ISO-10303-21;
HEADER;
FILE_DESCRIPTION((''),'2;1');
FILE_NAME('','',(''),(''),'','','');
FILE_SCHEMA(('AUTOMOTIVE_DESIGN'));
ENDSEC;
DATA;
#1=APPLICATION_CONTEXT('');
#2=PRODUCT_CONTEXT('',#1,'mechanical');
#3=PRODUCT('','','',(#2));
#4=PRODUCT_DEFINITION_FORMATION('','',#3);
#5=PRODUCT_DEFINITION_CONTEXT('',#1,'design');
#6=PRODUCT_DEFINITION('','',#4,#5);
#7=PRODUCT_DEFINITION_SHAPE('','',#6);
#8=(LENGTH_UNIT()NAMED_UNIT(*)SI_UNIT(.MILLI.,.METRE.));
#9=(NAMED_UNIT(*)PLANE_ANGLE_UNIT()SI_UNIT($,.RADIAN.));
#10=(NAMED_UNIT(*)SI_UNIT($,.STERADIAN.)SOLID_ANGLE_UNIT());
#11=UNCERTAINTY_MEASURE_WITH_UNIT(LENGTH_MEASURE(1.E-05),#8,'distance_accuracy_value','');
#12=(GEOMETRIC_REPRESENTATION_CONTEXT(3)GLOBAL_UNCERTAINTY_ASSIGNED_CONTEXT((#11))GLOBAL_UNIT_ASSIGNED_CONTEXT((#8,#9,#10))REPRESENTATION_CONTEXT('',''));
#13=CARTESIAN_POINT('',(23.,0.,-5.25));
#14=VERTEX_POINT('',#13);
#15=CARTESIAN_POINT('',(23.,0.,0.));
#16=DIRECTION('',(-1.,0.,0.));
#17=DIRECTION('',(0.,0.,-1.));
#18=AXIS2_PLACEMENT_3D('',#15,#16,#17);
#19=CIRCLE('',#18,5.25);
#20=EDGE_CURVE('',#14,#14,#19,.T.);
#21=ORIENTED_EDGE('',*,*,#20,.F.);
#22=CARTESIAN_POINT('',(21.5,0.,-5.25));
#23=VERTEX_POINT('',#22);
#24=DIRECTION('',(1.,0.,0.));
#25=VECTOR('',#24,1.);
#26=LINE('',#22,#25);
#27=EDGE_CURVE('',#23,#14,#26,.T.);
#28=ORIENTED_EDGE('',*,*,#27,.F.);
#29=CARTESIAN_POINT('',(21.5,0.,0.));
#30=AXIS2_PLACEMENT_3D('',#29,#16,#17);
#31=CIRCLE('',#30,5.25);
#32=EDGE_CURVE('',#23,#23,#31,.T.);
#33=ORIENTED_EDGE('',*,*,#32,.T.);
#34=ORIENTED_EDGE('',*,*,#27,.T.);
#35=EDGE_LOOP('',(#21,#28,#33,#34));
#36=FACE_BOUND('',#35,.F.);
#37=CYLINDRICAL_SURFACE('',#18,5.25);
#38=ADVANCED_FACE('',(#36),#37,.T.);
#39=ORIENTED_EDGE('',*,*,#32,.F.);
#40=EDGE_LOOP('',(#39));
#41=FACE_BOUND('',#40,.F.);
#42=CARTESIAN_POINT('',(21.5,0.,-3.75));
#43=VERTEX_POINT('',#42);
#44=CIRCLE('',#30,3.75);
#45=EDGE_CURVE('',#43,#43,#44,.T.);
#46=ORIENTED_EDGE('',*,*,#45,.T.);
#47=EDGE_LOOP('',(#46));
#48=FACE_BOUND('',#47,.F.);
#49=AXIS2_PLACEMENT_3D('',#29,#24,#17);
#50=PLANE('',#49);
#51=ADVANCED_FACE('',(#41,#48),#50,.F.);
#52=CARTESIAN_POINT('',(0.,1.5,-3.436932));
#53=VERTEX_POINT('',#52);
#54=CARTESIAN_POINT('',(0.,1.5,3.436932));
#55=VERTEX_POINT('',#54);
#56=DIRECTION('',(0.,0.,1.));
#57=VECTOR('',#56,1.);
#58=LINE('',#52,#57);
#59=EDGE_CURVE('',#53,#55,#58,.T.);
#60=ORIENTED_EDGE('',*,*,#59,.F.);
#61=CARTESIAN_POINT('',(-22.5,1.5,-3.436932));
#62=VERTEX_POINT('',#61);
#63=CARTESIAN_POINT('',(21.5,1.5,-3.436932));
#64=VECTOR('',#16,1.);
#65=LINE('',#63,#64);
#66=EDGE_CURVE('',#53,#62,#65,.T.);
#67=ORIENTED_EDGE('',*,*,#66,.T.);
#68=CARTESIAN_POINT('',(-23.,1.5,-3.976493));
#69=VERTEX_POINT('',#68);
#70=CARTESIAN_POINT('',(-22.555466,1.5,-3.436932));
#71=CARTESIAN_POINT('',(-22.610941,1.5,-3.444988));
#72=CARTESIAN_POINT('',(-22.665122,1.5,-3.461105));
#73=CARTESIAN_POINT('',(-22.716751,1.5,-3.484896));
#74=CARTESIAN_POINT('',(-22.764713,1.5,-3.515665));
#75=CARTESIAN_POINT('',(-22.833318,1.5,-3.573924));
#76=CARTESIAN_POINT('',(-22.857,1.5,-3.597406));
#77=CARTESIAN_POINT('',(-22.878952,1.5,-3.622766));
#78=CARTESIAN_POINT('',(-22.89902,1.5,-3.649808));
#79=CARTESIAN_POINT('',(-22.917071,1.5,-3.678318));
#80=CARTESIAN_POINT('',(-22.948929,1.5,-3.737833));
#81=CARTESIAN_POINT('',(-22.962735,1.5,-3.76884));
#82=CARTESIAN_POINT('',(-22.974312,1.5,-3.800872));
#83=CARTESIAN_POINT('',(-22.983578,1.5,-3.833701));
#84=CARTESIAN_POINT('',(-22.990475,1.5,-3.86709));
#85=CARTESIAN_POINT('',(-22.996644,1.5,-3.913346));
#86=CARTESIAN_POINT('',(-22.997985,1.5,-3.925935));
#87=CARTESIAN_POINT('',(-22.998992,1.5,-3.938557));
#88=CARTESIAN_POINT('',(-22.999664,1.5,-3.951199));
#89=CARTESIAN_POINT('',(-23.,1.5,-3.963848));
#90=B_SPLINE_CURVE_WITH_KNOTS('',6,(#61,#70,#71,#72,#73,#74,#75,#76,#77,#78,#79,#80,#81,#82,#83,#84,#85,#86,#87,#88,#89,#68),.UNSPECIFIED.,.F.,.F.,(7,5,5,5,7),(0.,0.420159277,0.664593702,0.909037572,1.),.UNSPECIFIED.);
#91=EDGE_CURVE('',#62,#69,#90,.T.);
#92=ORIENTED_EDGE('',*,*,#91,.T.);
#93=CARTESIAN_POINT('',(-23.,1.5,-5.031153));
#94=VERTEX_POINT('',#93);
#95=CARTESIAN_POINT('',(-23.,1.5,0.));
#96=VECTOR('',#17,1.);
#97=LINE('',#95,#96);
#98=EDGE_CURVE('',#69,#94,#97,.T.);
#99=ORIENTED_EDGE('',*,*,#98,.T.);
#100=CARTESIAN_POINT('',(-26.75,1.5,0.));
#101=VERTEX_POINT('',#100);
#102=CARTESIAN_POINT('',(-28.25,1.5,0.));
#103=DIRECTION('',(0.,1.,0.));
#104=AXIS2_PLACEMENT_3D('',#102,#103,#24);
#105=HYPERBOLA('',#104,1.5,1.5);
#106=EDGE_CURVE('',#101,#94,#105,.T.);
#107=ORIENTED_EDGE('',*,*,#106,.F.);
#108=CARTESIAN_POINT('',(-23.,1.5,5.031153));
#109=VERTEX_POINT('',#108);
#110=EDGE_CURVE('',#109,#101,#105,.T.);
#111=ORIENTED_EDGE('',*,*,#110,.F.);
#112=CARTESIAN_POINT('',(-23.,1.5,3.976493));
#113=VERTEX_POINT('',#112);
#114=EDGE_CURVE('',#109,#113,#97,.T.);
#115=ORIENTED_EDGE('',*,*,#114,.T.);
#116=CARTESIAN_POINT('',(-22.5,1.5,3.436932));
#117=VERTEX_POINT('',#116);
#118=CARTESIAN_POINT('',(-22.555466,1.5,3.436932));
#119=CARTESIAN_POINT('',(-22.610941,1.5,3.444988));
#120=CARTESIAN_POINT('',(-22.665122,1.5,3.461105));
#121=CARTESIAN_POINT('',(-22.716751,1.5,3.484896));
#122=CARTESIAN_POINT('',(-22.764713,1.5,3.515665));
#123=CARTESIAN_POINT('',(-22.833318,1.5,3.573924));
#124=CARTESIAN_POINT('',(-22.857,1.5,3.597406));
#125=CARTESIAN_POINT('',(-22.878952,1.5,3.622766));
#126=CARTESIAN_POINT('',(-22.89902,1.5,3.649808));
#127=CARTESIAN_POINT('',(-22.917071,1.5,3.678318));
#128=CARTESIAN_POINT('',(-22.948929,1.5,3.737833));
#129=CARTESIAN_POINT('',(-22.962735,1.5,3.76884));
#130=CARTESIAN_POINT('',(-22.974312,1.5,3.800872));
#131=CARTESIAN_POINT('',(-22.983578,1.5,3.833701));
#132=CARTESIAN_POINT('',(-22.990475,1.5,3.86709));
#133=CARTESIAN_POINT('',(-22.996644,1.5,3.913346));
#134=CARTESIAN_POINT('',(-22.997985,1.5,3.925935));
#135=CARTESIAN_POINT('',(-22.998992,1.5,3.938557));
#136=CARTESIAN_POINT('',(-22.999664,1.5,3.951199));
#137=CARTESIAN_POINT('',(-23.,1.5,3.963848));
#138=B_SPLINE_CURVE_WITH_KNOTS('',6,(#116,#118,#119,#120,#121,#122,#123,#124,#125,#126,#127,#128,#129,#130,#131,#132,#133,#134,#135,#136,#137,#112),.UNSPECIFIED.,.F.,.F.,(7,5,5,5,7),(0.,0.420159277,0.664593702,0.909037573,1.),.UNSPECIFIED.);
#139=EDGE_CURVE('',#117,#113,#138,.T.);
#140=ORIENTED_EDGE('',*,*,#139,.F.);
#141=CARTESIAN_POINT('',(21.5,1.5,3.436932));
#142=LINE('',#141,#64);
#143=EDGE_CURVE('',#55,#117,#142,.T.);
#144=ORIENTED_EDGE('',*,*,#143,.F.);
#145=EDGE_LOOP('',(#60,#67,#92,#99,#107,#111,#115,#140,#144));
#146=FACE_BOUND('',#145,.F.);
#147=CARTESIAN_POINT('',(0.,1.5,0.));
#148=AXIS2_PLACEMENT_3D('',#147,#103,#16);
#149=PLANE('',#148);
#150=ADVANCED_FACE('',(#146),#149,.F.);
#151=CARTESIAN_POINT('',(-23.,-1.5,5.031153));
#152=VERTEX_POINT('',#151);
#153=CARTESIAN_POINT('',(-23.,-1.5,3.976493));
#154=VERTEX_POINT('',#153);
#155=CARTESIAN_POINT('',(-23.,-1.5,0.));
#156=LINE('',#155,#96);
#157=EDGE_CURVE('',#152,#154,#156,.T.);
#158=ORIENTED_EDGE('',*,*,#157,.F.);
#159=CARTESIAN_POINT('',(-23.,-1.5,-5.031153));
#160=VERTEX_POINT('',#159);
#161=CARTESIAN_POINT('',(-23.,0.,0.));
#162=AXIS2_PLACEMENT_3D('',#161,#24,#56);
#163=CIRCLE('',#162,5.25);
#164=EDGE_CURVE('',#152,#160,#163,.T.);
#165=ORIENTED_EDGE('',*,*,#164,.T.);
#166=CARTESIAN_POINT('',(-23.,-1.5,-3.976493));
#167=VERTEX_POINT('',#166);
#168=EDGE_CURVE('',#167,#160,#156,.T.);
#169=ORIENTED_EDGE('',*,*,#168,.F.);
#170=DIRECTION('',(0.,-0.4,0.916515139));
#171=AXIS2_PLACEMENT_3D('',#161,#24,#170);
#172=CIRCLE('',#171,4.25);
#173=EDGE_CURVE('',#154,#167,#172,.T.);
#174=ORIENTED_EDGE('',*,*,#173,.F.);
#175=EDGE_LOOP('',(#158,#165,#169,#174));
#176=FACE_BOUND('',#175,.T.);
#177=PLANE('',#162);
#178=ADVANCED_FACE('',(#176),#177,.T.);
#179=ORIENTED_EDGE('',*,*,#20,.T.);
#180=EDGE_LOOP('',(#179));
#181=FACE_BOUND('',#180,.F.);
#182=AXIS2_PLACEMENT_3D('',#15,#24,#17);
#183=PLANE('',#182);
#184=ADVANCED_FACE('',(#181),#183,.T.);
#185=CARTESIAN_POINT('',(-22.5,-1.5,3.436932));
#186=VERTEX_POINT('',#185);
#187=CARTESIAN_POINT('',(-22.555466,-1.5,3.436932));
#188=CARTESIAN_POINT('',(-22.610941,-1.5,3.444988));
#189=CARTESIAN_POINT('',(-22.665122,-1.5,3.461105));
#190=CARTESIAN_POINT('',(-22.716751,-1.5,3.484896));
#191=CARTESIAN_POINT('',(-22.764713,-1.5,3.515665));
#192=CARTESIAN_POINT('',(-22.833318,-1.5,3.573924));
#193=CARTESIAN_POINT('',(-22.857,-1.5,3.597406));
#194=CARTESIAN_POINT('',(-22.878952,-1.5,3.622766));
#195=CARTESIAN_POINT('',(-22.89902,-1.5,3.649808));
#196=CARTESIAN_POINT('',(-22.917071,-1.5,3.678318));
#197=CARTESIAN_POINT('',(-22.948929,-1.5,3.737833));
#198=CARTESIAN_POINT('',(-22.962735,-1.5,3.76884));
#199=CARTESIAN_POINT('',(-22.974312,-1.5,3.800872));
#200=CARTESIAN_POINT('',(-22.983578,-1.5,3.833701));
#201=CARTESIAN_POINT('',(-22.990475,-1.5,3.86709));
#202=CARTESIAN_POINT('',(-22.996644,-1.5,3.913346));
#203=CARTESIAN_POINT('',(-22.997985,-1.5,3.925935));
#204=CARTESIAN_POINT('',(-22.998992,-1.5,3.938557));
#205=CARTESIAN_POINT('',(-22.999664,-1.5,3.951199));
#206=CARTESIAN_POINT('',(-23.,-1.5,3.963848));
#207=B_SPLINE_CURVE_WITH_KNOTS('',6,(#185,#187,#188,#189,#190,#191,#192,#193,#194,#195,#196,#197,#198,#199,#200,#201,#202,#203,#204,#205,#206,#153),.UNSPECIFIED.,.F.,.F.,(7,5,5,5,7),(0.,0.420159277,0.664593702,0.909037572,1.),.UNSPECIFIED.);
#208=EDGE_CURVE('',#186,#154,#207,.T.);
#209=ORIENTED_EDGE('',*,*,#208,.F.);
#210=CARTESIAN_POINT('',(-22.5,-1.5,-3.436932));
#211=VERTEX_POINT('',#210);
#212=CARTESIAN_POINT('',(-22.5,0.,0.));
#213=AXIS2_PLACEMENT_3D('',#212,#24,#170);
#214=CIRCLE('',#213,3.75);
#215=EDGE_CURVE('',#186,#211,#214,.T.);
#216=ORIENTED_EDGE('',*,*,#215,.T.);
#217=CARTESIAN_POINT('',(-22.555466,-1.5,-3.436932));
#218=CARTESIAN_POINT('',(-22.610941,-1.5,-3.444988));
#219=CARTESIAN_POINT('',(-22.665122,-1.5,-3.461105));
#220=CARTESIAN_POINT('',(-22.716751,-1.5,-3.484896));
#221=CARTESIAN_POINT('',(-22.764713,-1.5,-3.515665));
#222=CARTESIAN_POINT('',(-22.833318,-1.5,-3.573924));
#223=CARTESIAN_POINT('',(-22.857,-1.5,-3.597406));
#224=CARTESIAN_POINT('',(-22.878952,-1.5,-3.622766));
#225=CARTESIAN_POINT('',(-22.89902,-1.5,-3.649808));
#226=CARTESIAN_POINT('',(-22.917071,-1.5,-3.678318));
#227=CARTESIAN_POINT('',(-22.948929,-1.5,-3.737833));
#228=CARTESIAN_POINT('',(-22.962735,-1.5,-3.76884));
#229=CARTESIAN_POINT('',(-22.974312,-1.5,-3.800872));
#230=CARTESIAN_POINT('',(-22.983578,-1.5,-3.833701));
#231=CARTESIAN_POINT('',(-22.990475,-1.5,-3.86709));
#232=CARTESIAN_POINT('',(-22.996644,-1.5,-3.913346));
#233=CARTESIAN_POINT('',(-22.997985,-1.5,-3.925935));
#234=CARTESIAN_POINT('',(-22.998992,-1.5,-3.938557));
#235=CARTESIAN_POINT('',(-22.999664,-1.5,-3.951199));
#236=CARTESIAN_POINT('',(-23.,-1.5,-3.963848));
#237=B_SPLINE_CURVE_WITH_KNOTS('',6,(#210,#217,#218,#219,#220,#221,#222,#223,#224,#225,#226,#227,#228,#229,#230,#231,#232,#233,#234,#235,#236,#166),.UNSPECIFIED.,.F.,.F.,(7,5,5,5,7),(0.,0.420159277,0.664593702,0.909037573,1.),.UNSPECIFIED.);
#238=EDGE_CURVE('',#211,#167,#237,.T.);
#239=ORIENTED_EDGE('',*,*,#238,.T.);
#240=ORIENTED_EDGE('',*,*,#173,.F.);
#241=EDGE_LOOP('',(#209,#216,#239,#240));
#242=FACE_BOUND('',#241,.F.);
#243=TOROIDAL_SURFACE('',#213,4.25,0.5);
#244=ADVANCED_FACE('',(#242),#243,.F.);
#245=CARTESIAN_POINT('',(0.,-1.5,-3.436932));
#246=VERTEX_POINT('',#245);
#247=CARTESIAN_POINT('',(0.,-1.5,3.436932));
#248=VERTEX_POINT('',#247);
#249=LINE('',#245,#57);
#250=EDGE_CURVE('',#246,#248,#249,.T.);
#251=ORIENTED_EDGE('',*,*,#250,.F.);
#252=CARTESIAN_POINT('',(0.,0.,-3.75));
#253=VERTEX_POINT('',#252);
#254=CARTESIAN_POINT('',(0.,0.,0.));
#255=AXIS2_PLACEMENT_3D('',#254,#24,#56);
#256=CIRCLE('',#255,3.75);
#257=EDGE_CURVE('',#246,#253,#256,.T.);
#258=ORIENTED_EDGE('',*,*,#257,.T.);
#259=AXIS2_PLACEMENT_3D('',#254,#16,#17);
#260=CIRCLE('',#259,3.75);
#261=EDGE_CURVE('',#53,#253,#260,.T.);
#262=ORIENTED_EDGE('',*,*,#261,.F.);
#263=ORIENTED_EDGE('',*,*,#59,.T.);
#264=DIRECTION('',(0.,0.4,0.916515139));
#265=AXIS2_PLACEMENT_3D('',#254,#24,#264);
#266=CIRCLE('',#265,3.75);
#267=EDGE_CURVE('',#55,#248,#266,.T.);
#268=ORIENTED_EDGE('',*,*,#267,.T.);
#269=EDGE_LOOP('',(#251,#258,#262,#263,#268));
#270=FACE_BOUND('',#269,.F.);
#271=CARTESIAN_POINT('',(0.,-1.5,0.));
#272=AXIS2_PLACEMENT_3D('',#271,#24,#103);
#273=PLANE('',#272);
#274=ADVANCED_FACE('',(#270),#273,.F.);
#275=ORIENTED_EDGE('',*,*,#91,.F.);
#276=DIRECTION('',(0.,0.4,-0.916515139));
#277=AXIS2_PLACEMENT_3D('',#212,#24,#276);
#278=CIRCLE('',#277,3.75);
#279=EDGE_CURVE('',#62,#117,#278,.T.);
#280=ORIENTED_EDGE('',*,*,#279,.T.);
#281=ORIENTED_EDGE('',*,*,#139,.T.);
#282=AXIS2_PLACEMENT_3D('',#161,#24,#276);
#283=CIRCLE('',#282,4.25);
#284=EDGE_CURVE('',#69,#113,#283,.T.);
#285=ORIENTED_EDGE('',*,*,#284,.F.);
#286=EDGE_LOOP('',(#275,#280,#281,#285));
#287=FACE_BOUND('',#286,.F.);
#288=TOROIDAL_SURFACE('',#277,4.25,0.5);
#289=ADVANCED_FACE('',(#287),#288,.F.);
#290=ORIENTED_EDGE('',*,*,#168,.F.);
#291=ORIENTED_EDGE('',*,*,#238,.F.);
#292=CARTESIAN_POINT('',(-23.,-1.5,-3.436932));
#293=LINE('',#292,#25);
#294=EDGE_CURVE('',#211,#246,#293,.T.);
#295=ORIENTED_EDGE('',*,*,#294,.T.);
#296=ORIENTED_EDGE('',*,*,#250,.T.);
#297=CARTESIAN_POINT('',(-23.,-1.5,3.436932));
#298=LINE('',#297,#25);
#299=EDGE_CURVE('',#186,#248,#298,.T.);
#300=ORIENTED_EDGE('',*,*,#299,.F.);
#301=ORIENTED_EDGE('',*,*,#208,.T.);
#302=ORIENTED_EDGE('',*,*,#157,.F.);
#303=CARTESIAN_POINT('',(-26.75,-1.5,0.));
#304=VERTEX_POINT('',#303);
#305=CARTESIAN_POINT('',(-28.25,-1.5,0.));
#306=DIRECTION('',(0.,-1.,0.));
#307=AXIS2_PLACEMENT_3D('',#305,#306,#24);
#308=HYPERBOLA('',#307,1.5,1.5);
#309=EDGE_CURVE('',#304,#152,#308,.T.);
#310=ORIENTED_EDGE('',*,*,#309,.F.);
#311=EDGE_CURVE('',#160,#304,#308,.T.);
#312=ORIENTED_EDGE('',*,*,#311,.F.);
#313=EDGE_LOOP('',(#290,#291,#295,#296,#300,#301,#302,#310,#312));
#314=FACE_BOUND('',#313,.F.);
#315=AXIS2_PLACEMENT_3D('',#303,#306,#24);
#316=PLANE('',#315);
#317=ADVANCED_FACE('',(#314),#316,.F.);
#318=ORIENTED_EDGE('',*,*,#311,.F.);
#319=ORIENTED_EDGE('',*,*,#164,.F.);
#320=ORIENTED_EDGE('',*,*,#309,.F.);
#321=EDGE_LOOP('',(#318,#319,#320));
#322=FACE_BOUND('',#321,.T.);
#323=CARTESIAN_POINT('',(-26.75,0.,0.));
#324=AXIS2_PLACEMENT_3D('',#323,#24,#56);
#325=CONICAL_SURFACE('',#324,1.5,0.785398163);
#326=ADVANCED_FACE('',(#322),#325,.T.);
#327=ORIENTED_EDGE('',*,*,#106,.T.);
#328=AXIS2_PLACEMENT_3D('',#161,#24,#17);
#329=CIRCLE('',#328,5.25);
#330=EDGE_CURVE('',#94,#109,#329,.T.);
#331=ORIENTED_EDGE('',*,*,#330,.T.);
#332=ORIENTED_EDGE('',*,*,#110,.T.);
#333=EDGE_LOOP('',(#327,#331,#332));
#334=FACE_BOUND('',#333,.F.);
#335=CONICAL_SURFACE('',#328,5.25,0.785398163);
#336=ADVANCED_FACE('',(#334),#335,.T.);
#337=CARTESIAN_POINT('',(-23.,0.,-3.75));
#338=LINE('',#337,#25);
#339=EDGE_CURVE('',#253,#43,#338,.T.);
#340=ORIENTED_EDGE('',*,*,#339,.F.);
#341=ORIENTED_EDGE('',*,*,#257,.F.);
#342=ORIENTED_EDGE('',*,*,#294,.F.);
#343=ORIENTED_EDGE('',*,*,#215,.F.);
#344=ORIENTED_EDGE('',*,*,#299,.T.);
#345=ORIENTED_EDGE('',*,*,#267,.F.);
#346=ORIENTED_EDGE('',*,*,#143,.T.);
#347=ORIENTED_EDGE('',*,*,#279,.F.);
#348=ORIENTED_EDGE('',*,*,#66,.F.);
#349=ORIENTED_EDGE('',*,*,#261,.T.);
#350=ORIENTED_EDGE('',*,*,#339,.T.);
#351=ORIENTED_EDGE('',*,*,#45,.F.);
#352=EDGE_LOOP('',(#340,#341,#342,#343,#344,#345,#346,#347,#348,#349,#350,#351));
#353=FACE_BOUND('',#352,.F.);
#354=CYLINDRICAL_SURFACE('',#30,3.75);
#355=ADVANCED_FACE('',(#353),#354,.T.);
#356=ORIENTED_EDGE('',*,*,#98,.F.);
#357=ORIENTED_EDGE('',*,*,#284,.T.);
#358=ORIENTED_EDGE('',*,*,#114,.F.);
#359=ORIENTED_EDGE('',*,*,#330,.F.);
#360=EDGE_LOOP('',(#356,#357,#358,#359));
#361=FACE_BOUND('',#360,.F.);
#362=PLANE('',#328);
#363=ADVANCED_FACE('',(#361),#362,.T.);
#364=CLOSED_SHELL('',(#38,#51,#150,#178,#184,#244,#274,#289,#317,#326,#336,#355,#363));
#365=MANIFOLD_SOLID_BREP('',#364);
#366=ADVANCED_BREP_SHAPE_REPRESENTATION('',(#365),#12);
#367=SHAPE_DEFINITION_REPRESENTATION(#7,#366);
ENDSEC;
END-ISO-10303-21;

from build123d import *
from build123d import SkipClean  # not in build123d's __all__

# Parameters (mm, degrees)
F1_ANGLE_BACK = 90
F1_ANGLE      = 180
F2_ANGLE_BACK = 90
F2_ANGLE      = 180
F3_DEPTH      = 5.5
F4_R          = 0.5


with BuildPart() as f1:
    # F0 (on Top) → F1 (revolve)
    with BuildSketch(Plane.XY, mode=Mode.PRIVATE) as f1_sk:
        Polygon((23, 0), (0, 0), (0, -1.5), (0, -3.75), (21.5, -3.75), (21.5, -5.25), (23, -5.25), (23, -3.75), (23, -1.5), align=None)
        Polygon((0, -3.75), (0, -1.5), (-11.5, -1.5), (-23, -1.5), (-26.75, -1.5), (-23, -5.25), (-23, -3.75), align=None)
    revolve(f1_sk.sketch.rotate(Axis((11.5, 0, 0), (1, 0, 0)), -F1_ANGLE_BACK), axis=Axis((11.5, 0, 0), (1, 0, 0)), revolution_arc=F1_ANGLE)

    # F0 (on Top) → F2 (revolve)
    with BuildSketch(Plane.XY, mode=Mode.PRIVATE) as f2_sk:
        Polygon((21.5, 5.25), (21.5, 3.75), (11.5, 3.75), (0, 3.75), (0, 1.5), (0, 0), (23, 0), (23, 1.5), (23, 3.75), (23, 5.25), align=None)
        Polygon((0, 1.5), (0, 3.75), (-23, 3.75), (-23, 5.25), (-26.75, 1.5), (-23, 1.5), (-11.5, 1.5), align=None)
    revolve(f2_sk.sketch.rotate(Axis((11.5, 0, 0), (1, 0, 0)), -F2_ANGLE_BACK), axis=Axis((11.5, 0, 0), (1, 0, 0)), revolution_arc=F2_ANGLE)

    # F0 (on Top) → F3 (cut, symmetric)
    with BuildSketch(Plane.XY):
        Polygon((0, 0), (0, 1.5), (-11.5, 1.5), (-23, 1.5), (-26.75, 1.5), (-26.75, -1.5), (-23, -1.5), (-11.5, -1.5), (0, -1.5), align=None)
    with SkipClean():  # cleaning this boolean's faces spoils the solid; the shape is the same uncleaned
        extrude(amount=F3_DEPTH, both=True, mode=Mode.SUBTRACT)

    # F4
    f4_edges = [f1.edges().sort_by_distance(p)[0] for p in [
        (-23, 3.75, 0),
        (-23, -3.75, 0),
    ]]
    fillet(f4_edges, radius=F4_R)


solid = f1.part
